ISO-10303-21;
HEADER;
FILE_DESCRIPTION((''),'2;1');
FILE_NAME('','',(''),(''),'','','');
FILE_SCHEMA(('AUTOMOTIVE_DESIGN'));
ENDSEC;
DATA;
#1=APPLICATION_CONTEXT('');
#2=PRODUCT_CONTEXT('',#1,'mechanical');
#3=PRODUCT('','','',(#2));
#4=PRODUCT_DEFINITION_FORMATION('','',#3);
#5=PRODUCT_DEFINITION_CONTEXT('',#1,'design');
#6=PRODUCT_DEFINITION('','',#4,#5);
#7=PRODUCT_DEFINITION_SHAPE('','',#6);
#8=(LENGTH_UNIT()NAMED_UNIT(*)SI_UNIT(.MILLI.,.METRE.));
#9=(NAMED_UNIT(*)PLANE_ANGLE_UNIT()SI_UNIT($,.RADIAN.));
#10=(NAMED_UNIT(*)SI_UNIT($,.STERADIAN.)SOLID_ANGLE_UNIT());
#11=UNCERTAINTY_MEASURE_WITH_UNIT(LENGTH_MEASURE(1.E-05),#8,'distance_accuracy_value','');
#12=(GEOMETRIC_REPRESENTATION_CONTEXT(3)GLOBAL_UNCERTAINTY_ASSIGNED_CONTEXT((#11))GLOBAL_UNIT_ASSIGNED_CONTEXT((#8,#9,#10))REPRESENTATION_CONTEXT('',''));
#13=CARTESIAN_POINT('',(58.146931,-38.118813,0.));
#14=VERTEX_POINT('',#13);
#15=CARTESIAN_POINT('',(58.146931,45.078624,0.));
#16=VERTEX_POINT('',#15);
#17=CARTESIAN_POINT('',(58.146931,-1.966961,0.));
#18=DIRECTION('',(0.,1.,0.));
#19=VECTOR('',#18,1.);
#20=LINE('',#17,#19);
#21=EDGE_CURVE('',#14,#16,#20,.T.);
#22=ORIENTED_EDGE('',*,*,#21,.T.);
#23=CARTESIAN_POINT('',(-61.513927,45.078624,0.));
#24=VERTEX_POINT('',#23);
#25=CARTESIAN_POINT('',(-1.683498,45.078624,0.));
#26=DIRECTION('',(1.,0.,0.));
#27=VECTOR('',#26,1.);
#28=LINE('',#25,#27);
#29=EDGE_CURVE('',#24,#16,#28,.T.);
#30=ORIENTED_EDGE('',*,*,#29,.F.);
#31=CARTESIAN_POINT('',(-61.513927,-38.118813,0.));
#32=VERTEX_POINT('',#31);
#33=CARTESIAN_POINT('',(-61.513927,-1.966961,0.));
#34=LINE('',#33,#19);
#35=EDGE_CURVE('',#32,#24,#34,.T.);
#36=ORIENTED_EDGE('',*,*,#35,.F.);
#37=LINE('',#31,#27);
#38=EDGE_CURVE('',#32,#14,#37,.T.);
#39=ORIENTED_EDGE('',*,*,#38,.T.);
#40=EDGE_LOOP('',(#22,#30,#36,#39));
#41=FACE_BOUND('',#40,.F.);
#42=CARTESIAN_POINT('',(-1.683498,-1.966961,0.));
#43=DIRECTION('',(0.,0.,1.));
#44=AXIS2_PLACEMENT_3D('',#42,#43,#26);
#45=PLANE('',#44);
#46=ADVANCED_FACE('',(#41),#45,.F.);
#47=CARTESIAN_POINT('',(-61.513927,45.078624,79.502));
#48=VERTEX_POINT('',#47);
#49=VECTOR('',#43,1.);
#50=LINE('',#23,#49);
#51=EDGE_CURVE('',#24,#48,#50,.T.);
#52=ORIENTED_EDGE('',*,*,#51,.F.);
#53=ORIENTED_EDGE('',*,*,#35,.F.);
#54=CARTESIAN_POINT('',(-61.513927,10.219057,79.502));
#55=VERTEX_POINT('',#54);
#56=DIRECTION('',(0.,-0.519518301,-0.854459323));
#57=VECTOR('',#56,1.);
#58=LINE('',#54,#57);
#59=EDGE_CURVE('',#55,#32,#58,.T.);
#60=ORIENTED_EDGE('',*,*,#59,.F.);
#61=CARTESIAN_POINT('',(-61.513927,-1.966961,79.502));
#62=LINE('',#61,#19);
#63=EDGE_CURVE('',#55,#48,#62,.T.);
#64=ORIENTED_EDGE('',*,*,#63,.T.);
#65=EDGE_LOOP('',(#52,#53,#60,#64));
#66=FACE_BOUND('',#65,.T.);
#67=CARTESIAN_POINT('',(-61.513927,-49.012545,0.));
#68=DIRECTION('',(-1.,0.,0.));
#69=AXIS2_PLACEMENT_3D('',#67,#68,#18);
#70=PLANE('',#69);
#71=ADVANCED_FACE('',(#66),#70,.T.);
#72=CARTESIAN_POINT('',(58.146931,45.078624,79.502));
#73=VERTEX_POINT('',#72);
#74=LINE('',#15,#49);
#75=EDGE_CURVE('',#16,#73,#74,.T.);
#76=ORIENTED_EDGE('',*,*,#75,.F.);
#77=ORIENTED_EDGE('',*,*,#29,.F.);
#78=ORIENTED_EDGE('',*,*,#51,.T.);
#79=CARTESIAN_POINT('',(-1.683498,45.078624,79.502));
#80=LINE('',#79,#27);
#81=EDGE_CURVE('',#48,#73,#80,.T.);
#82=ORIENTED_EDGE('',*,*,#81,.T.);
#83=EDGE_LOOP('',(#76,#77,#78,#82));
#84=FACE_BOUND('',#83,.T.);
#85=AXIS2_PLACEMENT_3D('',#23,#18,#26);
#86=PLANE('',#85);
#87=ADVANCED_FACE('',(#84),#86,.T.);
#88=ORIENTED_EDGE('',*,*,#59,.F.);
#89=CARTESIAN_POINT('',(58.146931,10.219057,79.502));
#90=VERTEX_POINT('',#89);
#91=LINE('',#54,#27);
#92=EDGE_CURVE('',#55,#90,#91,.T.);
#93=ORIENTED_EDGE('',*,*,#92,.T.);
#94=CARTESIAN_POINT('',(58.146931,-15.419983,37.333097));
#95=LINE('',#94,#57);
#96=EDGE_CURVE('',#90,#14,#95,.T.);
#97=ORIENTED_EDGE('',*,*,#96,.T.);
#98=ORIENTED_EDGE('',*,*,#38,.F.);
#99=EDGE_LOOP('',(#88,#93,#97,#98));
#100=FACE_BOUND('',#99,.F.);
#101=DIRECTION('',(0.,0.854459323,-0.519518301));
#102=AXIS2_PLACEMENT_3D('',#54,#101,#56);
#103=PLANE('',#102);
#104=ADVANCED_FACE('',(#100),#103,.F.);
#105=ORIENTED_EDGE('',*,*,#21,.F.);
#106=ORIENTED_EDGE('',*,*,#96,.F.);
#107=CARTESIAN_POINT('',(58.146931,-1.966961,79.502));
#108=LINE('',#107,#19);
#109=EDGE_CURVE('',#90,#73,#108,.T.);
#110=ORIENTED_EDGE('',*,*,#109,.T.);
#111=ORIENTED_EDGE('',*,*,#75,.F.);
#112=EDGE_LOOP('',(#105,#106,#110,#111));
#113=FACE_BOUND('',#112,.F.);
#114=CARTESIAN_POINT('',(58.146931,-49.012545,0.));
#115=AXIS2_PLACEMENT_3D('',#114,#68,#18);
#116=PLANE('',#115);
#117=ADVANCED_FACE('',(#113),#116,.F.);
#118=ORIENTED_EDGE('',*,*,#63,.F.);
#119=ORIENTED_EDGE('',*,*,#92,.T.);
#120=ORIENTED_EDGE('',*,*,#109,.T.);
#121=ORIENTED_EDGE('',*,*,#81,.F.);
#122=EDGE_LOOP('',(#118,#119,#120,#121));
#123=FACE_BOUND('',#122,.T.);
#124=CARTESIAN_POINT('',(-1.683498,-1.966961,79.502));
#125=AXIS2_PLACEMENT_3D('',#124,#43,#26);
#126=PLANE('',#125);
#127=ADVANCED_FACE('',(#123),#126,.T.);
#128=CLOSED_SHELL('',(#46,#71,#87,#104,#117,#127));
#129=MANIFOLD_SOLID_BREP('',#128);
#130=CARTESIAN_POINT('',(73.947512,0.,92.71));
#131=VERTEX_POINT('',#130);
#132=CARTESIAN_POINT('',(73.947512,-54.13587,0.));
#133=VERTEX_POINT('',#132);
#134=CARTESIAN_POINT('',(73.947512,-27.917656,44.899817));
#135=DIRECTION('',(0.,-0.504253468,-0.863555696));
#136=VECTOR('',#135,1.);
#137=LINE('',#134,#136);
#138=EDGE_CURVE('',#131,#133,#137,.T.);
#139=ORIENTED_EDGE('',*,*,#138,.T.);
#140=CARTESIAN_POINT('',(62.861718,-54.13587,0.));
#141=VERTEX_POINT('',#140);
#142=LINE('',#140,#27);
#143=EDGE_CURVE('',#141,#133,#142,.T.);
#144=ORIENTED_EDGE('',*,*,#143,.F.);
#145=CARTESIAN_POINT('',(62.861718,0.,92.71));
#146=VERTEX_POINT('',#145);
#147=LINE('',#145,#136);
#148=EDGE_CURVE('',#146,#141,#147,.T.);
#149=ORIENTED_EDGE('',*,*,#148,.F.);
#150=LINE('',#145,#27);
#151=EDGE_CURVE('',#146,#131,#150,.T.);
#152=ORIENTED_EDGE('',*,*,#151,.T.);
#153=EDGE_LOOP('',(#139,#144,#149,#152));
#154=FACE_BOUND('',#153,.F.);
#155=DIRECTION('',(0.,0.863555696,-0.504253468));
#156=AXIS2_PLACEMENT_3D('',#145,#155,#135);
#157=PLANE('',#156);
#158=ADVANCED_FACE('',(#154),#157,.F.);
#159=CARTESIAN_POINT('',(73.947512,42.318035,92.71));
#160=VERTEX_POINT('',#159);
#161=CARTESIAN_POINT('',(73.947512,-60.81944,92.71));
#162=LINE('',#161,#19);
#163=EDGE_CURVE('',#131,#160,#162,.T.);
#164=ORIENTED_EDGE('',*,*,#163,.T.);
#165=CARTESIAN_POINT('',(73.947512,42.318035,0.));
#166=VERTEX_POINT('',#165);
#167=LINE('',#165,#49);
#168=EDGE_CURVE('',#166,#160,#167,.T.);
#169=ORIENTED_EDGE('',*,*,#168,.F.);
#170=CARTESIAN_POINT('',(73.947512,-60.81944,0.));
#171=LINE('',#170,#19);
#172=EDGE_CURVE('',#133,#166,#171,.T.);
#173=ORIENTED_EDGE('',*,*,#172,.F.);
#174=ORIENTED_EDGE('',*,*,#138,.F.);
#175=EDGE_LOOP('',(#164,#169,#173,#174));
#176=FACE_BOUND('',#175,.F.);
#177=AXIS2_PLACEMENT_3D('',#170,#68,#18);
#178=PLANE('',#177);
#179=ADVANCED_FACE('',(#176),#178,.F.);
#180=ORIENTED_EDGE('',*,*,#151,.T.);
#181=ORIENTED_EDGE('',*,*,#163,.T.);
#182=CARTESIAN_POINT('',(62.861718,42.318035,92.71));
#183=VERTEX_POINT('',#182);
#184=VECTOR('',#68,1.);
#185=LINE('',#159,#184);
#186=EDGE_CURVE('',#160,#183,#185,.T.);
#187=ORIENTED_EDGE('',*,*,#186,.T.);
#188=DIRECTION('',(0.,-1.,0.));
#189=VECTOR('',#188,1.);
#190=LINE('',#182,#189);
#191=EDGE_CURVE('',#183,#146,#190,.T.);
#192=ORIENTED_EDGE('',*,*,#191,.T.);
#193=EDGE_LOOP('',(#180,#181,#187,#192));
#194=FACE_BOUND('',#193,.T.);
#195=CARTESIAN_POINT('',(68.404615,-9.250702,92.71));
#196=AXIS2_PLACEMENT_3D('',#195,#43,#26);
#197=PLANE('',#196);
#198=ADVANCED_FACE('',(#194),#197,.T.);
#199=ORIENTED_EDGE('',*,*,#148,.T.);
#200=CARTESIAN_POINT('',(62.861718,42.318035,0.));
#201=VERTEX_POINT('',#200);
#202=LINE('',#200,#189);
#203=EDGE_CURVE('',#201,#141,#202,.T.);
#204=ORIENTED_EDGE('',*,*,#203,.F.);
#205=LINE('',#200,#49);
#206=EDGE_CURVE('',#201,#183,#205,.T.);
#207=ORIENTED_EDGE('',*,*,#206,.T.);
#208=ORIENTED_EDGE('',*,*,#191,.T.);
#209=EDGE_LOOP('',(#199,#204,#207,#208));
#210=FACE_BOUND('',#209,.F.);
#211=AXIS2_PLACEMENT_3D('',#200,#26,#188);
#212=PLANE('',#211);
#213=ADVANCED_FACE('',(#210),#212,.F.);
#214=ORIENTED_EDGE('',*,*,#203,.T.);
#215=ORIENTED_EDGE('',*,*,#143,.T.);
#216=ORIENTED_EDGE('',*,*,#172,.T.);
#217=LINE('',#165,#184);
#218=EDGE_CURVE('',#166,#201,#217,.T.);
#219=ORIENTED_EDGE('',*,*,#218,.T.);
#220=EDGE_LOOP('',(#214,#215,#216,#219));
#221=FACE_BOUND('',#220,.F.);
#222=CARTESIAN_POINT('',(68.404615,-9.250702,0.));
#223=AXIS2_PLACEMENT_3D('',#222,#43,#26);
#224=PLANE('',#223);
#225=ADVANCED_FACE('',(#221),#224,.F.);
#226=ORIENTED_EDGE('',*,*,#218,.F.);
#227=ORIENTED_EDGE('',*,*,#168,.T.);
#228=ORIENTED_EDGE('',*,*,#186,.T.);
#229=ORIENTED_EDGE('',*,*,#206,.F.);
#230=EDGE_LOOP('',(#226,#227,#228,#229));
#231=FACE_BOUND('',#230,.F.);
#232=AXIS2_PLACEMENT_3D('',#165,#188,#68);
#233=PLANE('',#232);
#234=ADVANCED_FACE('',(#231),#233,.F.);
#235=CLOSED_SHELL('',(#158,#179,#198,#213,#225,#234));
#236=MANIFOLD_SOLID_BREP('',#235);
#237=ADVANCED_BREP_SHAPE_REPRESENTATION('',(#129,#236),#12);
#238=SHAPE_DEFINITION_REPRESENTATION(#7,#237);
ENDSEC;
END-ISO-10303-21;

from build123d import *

# Parameters (mm, degrees)
F0_W     = 119.6608580649
F0_H     = 94.0911695361
F1_DEPTH = 79.502
F3_DEPTH = 92.71
F5_DEPTH = 135.4624384472
F7_DEPTH = 11.086793376


with BuildPart() as f1:
    # F0 (on Top) → F1 (new body)
    with BuildSketch(Plane.XY):
        with Locations((-1.6834978014, -1.9669607282)):
            Rectangle(F0_W, F0_H)
    extrude(amount=F1_DEPTH)

    # F4 (on face) → F5 (cut, through all)
    with BuildSketch(Plane(origin=(-61.5139268339, 0, 0), x_dir=(0, -1, 0), z_dir=(-1, 0, 0))):
        Polygon((-10.2190570906, 79.502), (38.1188131869, 0), (49.0125454962, 0), (49.0125454962, 5.3254961967), (49.0125454962, 79.502), align=None)
    extrude(amount=-F5_DEPTH, mode=Mode.SUBTRACT)


with BuildPart() as f3:
    # F2 (on Top) → F3 (new body)
    with BuildSketch(Plane.XY):
        Polygon((73.9475116134, 42.3180349171), (62.8617182374, 42.3180349171), (62.8617182374, -52.922450006), (62.8617182374, -60.81943959), (73.9475116134, -60.81943959), align=None)
    extrude(amount=F3_DEPTH)

    # F6 (on face) → F7 (cut, through all)
    with BuildSketch(Plane(origin=(62.8617182374, 0, 0), x_dir=(0, -1, 0), z_dir=(-1, 0, 0))):
        Polygon((0, 92.71), (54.1358701885, 0), (60.81943959, 0), (60.81943959, 92.71), align=None)
    extrude(amount=-F7_DEPTH, mode=Mode.SUBTRACT)


solid = Compound([f1.part, f3.part])
